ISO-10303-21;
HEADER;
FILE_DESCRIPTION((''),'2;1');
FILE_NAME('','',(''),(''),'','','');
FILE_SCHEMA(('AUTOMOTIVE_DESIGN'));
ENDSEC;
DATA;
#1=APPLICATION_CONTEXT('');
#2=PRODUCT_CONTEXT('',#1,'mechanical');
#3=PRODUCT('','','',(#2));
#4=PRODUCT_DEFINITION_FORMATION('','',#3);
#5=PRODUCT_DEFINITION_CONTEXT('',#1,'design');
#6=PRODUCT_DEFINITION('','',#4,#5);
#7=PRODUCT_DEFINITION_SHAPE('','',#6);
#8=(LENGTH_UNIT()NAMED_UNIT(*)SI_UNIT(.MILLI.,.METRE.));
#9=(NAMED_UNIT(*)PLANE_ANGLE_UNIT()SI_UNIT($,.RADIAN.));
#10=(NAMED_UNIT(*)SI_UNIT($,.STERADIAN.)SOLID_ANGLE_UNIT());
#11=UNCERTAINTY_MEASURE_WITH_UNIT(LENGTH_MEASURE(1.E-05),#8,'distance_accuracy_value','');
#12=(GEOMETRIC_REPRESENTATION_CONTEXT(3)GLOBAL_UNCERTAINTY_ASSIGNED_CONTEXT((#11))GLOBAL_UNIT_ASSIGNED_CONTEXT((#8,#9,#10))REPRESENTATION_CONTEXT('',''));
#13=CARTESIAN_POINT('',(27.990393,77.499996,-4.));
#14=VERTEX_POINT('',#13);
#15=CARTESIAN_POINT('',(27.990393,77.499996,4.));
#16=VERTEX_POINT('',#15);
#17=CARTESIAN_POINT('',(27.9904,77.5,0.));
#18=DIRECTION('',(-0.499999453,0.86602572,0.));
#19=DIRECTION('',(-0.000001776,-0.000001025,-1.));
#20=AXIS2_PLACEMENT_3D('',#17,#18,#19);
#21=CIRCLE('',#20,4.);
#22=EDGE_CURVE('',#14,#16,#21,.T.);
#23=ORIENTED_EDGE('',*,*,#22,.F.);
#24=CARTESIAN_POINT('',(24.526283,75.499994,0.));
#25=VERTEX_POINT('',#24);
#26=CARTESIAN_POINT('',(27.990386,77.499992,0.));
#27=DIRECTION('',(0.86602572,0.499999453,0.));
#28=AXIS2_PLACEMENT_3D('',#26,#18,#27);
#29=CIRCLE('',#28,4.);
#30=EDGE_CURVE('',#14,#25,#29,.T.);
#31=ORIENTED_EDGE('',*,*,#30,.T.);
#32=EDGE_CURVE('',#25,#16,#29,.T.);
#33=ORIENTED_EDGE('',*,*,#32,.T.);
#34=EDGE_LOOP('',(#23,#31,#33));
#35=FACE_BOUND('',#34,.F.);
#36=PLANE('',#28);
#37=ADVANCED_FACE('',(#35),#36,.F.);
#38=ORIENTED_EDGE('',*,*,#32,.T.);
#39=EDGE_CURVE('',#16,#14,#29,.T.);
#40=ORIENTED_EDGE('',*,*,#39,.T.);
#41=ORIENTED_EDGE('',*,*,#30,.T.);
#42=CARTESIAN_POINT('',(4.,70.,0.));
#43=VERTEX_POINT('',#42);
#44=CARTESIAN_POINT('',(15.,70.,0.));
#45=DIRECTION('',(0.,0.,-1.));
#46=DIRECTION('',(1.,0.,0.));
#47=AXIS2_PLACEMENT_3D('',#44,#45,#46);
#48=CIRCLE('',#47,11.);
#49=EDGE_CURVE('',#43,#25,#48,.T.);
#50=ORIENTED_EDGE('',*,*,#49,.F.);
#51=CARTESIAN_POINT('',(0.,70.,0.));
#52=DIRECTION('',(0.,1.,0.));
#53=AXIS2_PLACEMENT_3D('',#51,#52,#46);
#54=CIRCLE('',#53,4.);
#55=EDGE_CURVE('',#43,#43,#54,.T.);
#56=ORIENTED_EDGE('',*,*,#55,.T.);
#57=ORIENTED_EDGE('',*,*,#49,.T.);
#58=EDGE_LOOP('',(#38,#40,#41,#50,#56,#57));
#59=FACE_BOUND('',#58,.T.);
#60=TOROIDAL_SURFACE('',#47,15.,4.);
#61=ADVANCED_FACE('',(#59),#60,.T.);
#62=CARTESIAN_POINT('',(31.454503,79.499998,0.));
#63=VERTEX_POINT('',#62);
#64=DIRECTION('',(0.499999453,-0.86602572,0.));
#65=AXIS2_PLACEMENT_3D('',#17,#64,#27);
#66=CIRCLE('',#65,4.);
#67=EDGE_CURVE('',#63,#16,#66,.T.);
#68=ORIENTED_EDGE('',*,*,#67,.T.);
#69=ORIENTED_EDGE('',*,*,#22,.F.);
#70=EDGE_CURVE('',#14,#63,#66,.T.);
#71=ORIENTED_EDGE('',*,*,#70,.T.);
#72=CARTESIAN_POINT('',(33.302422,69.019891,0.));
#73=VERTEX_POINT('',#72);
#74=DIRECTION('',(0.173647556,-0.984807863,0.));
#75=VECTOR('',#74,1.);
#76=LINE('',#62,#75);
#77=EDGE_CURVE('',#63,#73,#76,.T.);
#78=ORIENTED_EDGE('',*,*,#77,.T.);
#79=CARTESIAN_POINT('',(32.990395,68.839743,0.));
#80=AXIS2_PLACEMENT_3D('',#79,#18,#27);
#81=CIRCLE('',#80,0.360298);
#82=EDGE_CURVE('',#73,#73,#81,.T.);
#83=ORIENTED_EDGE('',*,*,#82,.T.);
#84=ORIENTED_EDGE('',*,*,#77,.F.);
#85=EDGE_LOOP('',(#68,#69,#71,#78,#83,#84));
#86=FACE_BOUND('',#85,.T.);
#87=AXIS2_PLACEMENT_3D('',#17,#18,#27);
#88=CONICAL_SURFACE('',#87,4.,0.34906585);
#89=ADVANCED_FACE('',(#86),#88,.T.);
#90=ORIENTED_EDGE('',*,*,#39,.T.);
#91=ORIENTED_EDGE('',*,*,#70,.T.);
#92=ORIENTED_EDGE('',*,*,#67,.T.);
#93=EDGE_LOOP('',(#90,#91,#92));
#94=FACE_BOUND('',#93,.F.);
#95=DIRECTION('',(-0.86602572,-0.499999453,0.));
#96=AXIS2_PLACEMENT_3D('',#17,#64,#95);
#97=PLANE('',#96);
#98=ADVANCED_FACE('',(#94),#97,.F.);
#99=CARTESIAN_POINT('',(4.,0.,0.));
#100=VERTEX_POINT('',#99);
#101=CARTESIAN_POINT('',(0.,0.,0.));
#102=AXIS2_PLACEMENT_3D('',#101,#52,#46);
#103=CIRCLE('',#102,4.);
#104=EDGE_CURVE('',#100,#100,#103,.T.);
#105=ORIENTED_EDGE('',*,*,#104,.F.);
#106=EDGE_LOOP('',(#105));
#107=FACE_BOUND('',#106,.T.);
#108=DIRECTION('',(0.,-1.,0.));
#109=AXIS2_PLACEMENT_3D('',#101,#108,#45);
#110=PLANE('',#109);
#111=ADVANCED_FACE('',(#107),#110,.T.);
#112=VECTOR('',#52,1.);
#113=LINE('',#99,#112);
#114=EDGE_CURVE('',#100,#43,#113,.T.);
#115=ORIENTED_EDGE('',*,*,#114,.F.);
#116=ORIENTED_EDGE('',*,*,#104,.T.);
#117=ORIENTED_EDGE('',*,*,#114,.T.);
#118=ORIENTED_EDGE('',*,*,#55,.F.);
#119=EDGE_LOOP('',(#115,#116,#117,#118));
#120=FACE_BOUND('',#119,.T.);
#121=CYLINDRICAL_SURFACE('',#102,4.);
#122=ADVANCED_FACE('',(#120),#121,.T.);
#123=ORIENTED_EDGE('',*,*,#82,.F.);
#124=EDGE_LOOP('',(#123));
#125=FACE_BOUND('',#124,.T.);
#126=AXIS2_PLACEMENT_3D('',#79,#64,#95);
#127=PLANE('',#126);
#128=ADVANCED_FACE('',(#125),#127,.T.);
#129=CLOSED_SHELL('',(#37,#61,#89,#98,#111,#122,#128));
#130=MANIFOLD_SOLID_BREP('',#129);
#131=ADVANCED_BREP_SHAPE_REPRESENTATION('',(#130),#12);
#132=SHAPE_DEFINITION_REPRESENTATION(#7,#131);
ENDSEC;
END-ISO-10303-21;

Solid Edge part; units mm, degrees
sketch "Sketch1" plane through (0, 0, 0) normal (0, 0, 1) x (1, 0, 0)
  line L0 (0, 0) -> (0, 70)
  arc A0 (0, 70) -> (27.9904, 77.5) centre (15, 70) cw
sketch "Sketch2" plane through (0, 0, 0) normal (0, -1, 0) x (1, 0, 0)
  circle A0 centre (0, 0) radius 4
sweep "SweptProtrusion_1" add profiles "Sketch2" path "Sketch1"
sketch "Sketch3" plane through (27.9904, 77.5, 0) normal (0.5, -0.8660254, 0) x (0.8660254, 0.5, 0)
  circle A0 centre (0, 0) radius 4
extrude "ExtrudedProtrusion_1" add sketch "Sketch3" along normal blind 10 draft 20
